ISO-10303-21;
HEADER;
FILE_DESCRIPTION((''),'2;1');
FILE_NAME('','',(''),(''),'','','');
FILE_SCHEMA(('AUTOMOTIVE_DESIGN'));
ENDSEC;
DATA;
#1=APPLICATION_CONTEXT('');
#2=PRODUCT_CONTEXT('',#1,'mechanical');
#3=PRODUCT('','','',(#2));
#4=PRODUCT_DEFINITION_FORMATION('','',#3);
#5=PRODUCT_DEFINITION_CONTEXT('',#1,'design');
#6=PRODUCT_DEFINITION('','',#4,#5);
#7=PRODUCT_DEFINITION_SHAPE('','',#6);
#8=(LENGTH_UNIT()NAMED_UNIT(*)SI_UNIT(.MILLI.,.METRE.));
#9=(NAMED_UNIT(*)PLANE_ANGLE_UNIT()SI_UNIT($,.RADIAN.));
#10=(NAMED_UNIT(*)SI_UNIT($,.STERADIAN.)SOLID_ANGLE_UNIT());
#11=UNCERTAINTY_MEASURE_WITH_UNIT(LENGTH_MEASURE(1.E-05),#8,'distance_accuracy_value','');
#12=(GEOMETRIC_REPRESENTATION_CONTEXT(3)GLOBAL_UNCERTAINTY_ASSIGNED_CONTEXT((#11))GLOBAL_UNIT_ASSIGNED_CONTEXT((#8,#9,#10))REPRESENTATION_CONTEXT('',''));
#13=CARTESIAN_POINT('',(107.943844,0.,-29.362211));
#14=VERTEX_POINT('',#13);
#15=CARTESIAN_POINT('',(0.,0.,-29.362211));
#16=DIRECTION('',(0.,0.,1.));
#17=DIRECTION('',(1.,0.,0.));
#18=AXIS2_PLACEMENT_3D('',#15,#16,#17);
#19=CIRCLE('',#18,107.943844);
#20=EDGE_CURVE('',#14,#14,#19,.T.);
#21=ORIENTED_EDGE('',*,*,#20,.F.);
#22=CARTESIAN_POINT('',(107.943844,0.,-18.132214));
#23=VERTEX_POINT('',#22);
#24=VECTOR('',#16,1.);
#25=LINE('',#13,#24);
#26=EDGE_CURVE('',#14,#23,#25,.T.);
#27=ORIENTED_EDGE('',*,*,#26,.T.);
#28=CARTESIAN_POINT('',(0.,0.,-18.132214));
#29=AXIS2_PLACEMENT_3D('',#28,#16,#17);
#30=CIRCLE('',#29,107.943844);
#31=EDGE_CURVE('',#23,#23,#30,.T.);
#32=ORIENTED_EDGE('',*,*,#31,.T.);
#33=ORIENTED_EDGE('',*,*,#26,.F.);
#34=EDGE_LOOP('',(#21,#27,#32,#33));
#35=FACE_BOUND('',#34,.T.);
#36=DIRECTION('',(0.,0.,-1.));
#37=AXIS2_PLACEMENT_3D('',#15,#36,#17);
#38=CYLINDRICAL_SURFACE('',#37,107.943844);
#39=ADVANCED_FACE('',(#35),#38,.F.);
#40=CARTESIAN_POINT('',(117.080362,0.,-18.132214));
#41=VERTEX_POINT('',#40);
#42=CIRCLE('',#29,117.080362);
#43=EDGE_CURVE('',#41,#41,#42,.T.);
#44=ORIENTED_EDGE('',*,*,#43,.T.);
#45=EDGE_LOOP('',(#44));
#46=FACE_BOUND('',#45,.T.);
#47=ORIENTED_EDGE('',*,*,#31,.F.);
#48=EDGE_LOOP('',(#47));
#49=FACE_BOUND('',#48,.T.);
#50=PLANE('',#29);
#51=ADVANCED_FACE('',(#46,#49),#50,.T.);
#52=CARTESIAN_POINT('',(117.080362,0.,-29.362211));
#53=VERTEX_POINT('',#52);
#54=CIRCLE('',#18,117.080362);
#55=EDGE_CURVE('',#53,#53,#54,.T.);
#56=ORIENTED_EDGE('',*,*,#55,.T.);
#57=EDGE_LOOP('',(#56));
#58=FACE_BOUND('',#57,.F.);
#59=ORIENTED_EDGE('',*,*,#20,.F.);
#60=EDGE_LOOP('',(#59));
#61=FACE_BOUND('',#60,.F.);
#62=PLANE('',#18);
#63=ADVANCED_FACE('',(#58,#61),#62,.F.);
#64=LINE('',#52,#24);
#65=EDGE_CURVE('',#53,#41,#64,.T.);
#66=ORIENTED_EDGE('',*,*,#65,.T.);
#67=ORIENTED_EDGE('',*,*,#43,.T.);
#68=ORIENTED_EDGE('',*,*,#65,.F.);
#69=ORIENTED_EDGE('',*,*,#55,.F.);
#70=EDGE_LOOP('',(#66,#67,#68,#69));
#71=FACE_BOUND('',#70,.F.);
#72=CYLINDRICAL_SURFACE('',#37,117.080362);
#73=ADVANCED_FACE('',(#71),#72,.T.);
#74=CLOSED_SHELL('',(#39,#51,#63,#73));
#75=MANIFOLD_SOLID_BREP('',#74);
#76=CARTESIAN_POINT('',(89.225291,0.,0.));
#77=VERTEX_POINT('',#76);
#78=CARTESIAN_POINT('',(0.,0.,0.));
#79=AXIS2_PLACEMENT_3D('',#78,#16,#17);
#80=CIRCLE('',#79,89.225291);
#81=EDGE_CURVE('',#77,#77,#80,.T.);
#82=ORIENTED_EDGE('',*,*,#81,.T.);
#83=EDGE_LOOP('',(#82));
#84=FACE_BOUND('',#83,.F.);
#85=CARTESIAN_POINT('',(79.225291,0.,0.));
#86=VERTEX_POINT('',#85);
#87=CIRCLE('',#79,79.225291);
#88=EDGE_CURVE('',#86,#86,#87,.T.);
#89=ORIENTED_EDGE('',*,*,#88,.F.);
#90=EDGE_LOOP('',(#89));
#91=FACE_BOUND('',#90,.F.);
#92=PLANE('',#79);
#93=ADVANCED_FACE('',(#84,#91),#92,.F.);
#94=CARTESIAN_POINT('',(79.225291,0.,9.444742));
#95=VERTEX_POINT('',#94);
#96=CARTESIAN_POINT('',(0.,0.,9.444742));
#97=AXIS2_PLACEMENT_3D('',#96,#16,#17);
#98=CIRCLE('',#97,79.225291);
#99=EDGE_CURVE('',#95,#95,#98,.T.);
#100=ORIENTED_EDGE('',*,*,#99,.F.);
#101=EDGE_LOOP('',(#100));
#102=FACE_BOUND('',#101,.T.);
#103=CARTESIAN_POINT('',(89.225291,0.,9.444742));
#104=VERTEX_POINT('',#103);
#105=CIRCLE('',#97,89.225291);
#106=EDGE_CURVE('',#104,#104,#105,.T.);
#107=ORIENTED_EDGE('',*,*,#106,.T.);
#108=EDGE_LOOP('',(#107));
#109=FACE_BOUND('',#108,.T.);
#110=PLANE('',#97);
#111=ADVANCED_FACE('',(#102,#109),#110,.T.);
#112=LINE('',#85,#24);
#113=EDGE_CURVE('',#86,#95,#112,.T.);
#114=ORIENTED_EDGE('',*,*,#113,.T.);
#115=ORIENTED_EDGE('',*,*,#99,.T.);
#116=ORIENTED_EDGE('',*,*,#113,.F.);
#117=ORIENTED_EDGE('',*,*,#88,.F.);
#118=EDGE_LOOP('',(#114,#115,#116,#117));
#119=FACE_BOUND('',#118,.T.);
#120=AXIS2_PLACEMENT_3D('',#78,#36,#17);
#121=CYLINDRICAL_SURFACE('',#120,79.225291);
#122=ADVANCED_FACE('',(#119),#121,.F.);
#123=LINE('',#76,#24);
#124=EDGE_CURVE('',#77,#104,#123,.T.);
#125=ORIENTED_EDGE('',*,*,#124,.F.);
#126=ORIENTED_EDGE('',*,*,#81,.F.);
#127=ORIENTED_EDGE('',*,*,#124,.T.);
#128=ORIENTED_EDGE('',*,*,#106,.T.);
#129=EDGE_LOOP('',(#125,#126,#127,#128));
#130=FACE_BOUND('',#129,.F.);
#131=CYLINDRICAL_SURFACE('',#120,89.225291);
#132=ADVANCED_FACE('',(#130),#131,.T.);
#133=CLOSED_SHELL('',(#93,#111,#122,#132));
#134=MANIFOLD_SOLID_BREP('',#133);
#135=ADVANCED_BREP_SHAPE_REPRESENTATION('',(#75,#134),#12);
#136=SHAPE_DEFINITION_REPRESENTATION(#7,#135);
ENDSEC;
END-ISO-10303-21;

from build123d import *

# Parameters (mm, degrees)
F0_R     = 89.2252906984
F0_R_2   = 79.2252906984
F1_DEPTH = 9.4447415322
F3_R     = 117.0803624556
F3_R_2   = 107.9438435264
F4_DEPTH = 11.2299975008


# Not quite as in the source:
# - the program builds the solid bodies; features that only make, move or delete a surface that nothing else refers to are left out


with BuildPart() as f1:
    # F0 (on Top) → F1 (new body)
    with BuildSketch(Plane.XY):
        Circle(F0_R)
        Circle(F0_R_2, mode=Mode.SUBTRACT)
    extrude(amount=F1_DEPTH)


with BuildPart() as f4:
    # F3 (on offset) → F4 (new body)
    with BuildSketch(Plane.XY.offset(-29.3622110039)):
        Circle(F3_R)
        Circle(F3_R_2, mode=Mode.SUBTRACT)
    extrude(amount=F4_DEPTH)


solid = Compound([f1.part, f4.part])
